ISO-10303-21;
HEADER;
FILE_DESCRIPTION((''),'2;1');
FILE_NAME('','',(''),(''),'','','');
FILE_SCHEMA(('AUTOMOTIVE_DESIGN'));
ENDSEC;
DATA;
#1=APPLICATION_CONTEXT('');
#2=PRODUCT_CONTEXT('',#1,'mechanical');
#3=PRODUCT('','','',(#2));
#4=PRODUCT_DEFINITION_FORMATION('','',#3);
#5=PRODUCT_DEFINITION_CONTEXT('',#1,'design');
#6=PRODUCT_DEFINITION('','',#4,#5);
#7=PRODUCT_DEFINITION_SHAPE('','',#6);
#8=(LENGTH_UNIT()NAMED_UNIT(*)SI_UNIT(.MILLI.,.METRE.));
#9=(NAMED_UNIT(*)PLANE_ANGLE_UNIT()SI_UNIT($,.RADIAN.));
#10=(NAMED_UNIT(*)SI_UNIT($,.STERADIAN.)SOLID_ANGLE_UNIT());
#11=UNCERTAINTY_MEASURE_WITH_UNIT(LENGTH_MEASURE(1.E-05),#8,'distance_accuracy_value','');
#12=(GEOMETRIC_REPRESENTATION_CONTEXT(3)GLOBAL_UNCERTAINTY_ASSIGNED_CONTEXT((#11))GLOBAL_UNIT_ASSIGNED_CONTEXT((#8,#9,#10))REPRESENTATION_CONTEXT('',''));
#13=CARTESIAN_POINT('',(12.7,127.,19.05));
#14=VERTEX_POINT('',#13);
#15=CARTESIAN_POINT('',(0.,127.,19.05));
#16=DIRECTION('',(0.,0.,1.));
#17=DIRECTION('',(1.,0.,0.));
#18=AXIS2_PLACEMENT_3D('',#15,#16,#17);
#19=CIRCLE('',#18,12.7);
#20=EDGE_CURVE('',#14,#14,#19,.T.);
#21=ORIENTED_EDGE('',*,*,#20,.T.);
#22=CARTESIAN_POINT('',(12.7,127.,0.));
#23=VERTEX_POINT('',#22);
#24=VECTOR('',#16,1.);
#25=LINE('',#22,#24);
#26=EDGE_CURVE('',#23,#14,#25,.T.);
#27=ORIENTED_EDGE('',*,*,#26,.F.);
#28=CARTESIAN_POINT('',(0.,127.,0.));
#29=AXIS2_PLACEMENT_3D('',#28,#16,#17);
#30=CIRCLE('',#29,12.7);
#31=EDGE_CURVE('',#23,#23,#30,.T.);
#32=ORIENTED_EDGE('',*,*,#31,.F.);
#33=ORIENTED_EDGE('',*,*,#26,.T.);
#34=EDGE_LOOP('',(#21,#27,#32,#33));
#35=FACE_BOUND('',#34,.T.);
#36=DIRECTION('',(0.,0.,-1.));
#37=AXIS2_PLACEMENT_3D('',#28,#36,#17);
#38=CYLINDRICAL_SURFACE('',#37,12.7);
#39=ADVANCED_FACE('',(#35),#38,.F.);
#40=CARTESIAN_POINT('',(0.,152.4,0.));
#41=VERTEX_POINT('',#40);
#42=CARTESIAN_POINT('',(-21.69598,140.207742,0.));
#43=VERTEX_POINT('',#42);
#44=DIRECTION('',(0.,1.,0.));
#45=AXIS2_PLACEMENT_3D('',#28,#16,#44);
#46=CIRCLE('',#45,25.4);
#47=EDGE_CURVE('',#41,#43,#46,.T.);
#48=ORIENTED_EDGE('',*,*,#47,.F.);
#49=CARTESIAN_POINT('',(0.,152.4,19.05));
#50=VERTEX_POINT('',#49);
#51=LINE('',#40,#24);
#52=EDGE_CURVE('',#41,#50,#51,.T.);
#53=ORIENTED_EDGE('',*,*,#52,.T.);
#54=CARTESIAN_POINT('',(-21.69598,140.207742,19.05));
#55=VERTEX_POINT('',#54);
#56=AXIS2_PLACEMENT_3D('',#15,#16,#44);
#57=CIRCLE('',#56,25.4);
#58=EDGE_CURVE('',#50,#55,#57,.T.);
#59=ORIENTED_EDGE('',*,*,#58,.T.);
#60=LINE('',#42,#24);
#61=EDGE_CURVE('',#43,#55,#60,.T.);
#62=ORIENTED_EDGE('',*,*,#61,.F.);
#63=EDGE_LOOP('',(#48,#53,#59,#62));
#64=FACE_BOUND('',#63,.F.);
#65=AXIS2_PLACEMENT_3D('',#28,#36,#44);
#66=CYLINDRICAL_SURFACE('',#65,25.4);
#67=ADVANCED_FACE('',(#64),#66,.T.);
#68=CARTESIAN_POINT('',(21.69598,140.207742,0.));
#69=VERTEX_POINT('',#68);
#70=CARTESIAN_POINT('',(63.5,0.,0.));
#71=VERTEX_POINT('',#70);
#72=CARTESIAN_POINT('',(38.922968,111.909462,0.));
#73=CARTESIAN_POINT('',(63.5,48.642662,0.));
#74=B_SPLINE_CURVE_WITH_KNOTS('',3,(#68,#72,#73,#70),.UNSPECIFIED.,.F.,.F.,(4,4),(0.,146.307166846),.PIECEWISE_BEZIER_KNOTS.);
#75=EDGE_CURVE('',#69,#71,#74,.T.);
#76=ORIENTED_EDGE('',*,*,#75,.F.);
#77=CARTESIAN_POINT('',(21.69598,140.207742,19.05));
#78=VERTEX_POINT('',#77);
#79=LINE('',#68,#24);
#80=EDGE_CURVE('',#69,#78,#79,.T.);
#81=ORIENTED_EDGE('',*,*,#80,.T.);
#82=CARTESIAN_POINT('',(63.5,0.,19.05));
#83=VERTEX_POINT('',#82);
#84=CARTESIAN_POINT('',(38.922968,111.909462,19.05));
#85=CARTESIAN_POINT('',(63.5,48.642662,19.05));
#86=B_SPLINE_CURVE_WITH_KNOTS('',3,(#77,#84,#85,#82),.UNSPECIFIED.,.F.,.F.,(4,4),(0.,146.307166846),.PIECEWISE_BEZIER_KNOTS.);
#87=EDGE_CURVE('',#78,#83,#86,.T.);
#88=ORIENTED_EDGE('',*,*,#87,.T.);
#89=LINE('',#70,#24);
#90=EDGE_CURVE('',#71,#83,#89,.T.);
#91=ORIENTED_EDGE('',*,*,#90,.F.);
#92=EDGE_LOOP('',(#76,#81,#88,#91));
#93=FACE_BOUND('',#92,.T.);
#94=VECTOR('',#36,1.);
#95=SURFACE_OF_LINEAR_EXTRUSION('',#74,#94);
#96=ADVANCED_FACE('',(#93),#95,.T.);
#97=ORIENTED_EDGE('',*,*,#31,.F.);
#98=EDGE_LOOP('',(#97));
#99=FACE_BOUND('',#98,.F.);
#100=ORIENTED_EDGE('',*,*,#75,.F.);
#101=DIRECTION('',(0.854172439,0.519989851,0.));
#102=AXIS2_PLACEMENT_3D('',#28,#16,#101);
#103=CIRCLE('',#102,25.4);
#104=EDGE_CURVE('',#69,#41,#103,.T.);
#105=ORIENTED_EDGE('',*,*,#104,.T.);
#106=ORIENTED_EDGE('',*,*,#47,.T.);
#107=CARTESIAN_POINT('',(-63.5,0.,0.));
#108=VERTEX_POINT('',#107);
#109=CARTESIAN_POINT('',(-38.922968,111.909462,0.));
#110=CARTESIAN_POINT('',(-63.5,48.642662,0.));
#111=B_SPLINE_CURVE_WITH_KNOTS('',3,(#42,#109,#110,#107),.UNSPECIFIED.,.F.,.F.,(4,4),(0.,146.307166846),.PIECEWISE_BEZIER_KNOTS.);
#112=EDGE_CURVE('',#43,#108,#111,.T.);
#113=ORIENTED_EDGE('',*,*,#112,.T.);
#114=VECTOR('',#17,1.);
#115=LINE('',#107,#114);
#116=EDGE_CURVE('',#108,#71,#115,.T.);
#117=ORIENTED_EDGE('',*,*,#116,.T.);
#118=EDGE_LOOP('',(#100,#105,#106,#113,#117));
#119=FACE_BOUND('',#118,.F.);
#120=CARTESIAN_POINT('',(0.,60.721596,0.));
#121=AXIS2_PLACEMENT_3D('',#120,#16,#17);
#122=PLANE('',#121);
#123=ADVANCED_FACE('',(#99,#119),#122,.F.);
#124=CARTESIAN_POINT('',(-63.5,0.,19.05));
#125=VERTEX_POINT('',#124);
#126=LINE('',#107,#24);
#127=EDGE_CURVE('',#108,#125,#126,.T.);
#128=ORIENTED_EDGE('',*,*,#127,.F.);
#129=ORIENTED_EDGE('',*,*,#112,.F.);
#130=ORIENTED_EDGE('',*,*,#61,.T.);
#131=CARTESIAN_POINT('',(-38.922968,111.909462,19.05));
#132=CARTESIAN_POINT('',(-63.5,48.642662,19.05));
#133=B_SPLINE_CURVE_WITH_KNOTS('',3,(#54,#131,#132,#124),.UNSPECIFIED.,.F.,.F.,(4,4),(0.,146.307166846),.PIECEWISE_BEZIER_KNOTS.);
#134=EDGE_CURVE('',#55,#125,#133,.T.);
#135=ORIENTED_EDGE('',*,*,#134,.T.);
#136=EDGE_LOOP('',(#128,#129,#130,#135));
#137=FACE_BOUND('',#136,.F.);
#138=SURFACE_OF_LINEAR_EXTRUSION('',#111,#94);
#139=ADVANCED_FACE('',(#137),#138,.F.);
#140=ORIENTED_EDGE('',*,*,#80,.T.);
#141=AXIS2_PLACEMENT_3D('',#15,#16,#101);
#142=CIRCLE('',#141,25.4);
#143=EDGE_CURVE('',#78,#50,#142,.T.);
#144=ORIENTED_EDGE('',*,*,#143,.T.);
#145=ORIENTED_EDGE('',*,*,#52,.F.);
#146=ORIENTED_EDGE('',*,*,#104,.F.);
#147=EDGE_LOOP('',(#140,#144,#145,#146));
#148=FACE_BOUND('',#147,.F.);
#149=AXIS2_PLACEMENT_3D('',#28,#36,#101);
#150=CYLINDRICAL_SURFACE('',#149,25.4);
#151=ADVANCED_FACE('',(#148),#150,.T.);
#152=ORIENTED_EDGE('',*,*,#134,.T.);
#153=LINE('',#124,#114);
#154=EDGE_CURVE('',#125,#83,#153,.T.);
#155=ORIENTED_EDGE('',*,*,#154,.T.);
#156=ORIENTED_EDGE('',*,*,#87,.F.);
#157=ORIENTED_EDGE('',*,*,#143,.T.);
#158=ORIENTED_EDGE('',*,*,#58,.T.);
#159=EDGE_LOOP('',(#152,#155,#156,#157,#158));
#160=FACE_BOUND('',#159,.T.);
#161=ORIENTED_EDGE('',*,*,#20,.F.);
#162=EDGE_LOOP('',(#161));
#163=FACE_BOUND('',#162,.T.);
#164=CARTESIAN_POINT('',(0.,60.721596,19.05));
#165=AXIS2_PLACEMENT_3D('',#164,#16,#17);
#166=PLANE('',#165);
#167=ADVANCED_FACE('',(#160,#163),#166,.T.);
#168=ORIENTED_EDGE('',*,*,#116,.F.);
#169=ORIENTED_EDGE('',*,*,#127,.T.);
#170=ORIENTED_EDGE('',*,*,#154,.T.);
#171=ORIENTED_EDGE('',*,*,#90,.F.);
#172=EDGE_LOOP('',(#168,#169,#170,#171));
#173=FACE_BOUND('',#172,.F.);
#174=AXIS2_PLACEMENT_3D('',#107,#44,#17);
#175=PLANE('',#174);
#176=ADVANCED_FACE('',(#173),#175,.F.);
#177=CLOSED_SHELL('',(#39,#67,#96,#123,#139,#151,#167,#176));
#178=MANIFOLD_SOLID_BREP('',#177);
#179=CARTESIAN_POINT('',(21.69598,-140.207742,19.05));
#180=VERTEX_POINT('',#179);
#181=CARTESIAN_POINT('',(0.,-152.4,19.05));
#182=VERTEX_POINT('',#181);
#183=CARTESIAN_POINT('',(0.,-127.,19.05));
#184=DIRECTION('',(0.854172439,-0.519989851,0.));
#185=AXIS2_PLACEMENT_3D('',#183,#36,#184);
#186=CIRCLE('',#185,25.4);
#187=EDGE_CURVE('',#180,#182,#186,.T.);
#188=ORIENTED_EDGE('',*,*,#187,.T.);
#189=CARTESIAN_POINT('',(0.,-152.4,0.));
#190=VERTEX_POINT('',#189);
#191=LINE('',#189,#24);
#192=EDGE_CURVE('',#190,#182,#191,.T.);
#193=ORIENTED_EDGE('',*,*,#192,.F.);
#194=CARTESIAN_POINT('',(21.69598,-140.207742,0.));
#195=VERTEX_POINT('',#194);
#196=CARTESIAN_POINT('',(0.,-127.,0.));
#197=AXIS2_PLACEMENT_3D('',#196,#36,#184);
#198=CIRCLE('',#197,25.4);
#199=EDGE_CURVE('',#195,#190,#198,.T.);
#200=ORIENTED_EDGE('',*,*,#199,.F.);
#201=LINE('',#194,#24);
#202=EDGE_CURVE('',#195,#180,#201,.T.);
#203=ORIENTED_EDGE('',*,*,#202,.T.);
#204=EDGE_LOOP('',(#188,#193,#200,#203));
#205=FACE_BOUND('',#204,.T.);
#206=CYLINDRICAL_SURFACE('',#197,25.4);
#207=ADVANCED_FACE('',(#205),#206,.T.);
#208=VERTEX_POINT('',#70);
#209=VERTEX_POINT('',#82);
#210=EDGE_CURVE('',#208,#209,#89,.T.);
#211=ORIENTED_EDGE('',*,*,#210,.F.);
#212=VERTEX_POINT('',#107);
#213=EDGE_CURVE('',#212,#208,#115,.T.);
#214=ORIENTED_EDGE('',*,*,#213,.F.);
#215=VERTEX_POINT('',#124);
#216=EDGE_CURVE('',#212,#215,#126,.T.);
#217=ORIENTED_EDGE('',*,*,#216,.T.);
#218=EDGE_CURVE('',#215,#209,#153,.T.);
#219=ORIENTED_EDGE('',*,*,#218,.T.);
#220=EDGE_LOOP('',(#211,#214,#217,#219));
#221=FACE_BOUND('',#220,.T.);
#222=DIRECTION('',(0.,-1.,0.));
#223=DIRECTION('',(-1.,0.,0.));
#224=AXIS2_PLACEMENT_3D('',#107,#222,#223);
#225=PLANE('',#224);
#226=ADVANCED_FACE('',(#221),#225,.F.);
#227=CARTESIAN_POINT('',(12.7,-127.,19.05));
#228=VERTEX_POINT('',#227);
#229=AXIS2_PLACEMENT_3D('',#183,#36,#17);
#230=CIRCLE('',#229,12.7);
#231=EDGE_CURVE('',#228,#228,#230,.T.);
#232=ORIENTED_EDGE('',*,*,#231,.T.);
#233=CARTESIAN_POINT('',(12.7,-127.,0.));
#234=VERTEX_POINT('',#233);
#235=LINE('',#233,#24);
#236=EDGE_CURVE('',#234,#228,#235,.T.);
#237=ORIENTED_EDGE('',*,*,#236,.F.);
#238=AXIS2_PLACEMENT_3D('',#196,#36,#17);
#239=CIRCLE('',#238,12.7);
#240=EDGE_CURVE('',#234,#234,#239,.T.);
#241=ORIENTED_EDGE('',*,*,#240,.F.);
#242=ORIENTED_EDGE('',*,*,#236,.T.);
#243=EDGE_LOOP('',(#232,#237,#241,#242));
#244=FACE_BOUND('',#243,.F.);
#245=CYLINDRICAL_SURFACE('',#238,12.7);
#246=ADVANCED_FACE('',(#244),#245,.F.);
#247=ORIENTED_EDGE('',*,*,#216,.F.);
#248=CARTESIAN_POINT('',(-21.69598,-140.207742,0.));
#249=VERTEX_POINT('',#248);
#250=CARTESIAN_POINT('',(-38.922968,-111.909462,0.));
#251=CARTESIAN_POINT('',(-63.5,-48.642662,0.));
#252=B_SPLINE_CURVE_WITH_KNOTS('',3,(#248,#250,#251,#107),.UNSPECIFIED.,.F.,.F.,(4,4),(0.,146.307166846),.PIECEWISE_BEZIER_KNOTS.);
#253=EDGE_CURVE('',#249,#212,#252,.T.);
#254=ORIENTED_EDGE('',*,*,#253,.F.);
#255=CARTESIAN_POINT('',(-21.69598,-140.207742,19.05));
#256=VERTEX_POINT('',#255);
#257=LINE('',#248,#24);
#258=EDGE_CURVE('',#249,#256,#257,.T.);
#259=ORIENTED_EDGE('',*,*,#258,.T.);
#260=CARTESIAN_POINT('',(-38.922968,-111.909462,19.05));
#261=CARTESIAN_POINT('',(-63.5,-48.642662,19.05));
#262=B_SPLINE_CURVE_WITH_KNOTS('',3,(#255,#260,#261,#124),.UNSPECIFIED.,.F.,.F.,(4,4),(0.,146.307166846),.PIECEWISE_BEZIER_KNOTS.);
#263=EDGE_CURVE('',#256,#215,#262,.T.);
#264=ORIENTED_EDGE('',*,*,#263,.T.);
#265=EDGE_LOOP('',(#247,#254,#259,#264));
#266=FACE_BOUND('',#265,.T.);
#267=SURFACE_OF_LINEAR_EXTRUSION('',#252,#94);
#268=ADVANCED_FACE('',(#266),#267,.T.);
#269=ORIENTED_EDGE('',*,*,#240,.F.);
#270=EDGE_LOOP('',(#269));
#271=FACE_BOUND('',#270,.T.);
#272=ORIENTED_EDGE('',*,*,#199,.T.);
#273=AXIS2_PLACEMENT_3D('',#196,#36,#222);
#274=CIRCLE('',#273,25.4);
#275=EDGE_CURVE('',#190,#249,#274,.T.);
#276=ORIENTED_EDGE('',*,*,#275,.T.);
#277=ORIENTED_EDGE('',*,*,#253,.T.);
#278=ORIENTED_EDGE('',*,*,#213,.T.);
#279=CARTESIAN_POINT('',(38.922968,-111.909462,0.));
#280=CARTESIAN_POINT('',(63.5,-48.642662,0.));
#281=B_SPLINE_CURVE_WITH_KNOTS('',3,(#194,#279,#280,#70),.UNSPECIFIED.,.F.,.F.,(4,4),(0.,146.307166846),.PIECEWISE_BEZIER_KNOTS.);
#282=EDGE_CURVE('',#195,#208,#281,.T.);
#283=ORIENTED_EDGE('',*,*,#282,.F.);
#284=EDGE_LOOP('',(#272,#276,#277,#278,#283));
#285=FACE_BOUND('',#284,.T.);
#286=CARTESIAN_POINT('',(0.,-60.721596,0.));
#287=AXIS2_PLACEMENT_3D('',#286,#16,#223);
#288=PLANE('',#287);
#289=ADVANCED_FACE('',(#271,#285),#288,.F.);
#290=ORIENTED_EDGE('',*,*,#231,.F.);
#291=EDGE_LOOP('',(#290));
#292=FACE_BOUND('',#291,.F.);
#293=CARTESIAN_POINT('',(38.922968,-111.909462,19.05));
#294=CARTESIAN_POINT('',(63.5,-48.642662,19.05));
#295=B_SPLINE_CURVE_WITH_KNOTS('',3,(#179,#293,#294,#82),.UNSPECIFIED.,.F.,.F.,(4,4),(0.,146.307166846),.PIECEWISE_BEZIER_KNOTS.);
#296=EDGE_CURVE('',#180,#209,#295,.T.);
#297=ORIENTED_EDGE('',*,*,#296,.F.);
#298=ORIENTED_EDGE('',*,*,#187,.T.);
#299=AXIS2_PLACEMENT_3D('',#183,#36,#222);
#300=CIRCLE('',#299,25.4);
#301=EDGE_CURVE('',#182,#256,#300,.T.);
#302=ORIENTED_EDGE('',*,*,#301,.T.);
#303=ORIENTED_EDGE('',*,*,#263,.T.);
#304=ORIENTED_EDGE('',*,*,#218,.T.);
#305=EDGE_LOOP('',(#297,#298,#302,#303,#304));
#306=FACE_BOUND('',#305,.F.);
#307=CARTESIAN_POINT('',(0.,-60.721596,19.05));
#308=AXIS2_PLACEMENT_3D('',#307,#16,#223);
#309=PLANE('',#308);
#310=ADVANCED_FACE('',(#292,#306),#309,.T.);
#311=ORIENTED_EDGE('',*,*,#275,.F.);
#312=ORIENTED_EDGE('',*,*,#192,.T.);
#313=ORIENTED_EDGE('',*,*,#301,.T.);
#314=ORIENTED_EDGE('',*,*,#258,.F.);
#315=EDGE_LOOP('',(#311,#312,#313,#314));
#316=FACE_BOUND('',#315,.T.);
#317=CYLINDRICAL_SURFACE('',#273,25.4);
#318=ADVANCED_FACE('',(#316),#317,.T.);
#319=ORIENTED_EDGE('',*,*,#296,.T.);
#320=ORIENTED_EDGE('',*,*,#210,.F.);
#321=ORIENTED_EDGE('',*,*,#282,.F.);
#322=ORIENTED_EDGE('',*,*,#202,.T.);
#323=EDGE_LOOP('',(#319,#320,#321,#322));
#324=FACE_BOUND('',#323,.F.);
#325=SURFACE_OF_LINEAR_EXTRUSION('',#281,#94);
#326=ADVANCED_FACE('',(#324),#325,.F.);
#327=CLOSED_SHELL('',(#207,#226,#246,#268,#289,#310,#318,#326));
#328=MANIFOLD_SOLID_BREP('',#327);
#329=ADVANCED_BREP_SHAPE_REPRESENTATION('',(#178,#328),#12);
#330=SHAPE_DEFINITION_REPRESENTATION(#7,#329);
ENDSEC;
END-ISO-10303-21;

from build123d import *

# Parameters (mm, degrees)
F0_R     = 12.7
F1_DEPTH = 19.05


# Not quite as in the source:
# - a feature names something its author has since deleted; it is built from what else it names


with BuildPart() as f1:
    # F0 (on Top) → F1 (new body)
    with BuildSketch(Plane.XY):
        with BuildLine():
            Line((-63.5, 0), (0, 0))
            Line((0, 0), (63.5, 0))
            add(Edge.make_bspline(
                [(21.6959799399, 140.2077422162), (38.9229681719, 111.9094619356), (63.5, 48.6426617372), (63.5, 0)],
                knots=[0, 0, 0, 0, 146.3071668462, 146.3071668462, 146.3071668462, 146.3071668462], degree=3))
            ThreePointArc((21.6959799399, 140.2077422162), (12.4435394424, 149.1431327085), (0, 152.4))
            ThreePointArc((0, 152.4), (-12.4435394424, 149.1431327085), (-21.6959799399, 140.2077422162))
            add(Edge.make_bspline(
                [(-21.6959799399, 140.2077422162), (-38.9229681719, 111.9094619356), (-63.5, 48.6426617372), (-63.5, 0)],
                knots=[0, 0, 0, 0, 146.3071668462, 146.3071668462, 146.3071668462, 146.3071668462], degree=3))
        make_face()
        with Locations((0, 127)):
            Circle(F0_R, mode=Mode.SUBTRACT)
    extrude(amount=F1_DEPTH)


with BuildPart() as f2_1:
    # F2: instance of F1
    add(f1.part.mirror(Plane.XZ))


solid = Compound([f1.part, f2_1.part])
